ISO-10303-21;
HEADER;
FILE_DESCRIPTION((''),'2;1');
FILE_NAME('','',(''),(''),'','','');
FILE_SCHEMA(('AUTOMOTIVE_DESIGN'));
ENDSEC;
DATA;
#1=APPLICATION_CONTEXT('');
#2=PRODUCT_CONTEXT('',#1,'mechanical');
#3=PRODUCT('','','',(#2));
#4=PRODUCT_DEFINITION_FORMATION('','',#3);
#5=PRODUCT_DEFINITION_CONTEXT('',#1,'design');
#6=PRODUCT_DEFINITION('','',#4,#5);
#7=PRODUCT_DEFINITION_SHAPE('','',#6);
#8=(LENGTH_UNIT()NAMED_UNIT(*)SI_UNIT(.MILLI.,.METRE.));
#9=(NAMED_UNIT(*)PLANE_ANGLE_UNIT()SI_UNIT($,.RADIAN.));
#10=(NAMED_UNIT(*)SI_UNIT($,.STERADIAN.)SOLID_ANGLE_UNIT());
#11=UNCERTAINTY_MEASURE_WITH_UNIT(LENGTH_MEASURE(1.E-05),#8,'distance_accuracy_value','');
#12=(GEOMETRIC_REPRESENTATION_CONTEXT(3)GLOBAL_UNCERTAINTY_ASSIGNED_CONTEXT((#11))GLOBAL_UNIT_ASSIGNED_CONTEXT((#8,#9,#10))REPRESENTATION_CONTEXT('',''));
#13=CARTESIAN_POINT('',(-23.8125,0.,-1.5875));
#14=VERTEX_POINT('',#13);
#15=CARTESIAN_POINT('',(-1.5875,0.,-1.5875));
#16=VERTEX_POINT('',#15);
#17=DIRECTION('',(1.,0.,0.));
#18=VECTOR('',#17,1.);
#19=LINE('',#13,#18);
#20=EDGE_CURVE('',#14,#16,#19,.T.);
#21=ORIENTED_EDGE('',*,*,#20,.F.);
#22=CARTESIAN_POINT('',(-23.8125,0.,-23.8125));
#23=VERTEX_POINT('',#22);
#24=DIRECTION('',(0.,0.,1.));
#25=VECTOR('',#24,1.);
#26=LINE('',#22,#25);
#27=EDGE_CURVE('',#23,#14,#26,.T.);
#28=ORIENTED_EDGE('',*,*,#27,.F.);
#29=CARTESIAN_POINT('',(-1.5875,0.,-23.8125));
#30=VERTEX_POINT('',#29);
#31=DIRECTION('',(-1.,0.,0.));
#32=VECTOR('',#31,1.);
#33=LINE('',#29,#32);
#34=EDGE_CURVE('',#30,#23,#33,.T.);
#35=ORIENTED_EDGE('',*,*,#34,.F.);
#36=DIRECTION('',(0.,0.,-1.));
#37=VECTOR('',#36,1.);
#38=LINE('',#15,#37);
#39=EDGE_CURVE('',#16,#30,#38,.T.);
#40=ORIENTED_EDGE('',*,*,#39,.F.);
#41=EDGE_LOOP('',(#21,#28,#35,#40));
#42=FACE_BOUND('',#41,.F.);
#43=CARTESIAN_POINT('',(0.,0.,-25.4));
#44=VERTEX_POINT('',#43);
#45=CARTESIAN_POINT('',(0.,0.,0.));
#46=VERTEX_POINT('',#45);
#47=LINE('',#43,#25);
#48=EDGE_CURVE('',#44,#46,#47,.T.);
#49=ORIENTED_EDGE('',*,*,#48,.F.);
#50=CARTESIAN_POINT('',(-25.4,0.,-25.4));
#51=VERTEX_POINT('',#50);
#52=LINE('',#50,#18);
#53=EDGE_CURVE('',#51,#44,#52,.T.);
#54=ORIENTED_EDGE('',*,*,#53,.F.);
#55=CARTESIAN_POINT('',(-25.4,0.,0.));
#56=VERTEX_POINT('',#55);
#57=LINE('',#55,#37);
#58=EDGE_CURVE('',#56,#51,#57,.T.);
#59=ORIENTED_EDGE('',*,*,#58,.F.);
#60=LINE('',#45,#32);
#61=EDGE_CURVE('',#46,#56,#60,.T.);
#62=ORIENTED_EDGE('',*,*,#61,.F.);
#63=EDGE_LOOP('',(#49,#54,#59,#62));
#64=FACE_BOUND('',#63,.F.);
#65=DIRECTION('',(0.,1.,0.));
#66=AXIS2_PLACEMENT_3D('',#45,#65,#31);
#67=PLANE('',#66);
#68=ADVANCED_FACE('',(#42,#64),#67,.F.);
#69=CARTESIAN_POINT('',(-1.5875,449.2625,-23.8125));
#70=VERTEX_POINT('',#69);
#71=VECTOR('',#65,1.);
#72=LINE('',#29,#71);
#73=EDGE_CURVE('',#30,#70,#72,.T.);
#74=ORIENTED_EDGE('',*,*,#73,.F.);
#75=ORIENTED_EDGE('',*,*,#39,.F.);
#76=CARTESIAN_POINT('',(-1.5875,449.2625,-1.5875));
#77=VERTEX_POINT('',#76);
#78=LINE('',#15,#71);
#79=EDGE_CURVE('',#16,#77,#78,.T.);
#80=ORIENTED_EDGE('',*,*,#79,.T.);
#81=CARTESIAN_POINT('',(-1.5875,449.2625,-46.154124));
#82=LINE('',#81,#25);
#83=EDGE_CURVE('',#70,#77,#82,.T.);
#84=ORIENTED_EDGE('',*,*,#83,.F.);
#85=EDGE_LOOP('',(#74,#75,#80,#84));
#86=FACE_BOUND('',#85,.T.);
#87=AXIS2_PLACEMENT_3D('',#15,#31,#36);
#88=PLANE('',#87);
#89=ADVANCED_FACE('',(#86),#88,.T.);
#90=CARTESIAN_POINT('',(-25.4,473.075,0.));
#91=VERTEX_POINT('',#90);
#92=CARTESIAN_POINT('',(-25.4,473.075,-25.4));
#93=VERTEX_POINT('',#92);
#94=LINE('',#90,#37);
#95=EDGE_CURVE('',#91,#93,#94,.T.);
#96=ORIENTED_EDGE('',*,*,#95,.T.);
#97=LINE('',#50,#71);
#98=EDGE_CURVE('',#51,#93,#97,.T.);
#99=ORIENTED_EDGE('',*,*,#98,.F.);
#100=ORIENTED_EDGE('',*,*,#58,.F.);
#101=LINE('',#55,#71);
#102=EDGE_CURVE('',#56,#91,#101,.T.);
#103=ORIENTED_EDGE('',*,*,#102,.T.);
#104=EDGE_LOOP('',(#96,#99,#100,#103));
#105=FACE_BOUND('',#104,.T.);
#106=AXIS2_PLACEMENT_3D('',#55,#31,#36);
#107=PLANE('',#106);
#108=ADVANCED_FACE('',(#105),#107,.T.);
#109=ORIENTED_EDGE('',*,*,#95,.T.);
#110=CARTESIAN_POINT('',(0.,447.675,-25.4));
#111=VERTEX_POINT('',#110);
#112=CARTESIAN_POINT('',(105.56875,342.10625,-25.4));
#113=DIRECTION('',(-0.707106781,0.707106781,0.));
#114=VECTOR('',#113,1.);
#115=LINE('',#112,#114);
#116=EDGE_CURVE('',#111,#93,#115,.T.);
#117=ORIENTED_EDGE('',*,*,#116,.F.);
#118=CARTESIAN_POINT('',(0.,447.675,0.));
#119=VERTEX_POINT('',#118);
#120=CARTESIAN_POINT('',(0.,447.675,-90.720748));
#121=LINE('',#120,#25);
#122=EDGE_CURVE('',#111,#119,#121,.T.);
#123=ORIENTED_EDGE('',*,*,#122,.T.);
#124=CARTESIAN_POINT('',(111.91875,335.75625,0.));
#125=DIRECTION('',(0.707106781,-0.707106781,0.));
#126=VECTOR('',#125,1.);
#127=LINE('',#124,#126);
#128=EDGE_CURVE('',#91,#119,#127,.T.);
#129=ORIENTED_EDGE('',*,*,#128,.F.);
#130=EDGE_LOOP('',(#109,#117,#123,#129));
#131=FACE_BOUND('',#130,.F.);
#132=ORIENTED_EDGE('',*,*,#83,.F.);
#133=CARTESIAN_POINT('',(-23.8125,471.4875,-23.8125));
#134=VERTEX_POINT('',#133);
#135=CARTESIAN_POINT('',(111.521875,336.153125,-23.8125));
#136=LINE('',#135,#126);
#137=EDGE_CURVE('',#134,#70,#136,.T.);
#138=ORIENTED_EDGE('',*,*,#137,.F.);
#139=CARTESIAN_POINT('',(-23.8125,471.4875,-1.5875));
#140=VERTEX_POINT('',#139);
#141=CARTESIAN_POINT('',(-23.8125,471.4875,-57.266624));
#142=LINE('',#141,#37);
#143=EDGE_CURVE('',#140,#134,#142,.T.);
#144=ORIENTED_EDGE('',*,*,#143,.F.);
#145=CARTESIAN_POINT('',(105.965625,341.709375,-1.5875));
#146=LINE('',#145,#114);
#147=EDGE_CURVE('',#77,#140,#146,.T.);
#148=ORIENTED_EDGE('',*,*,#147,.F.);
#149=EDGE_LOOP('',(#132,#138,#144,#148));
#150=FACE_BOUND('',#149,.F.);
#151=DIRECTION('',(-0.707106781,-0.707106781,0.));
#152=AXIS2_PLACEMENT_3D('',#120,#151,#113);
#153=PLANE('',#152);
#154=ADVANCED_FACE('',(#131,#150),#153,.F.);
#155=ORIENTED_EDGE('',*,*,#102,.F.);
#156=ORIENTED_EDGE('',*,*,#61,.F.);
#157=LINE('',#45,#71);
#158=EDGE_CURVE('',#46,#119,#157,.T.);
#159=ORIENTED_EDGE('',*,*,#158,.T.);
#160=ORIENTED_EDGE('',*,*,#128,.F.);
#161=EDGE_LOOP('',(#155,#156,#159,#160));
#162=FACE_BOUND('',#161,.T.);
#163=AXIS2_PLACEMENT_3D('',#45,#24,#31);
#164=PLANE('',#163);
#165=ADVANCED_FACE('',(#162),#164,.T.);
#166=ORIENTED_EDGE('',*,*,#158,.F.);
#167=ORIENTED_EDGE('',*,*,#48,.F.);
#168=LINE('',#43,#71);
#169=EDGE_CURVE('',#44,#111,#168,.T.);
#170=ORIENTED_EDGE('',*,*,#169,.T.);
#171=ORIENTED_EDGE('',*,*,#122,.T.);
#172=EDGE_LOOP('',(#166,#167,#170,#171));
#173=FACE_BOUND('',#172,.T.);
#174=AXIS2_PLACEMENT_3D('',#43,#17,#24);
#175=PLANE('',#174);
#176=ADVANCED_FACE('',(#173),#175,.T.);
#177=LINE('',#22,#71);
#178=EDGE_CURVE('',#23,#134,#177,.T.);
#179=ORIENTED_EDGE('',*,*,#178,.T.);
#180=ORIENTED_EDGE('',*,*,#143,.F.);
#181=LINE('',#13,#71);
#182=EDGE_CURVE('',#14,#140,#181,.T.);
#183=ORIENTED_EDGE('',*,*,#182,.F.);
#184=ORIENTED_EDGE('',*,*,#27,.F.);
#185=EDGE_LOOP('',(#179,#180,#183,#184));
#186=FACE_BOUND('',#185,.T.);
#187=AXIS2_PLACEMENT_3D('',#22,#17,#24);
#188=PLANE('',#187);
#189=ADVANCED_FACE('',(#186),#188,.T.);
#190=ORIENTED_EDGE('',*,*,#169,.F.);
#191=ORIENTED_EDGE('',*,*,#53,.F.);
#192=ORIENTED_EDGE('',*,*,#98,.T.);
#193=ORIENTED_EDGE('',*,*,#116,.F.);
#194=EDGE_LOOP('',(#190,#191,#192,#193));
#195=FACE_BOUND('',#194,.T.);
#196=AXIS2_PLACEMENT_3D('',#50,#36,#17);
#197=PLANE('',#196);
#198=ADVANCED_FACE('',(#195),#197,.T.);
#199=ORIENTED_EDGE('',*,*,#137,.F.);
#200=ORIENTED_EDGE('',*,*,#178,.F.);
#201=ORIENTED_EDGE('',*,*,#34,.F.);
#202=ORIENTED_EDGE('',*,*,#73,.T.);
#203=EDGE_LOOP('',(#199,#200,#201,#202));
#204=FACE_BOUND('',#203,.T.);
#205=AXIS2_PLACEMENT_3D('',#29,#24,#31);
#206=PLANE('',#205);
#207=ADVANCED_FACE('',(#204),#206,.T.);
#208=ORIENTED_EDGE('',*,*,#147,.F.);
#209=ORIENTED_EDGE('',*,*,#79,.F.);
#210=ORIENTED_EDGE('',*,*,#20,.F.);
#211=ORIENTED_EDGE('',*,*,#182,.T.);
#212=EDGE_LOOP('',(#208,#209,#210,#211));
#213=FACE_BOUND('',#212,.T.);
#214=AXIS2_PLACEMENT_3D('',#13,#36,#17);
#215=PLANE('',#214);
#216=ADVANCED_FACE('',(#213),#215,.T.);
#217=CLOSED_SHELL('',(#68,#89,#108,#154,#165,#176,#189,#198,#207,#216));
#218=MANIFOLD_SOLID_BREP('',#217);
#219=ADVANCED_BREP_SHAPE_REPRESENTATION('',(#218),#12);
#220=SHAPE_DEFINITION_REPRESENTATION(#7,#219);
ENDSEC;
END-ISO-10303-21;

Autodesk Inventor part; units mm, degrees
ref_plane "YZ Plane" through (0, 0, 0) normal (1, 0, 0) x (0, 1, 0)
ref_plane "XZ Plane" through (0, 0, 0) normal (0, 1, 0) x (-1, 0, 0)
ref_plane "XY Plane" through (0, 0, 0) normal (0, 0, 1) x (1, 0, 0)
sketch "Sketch1" plane through (0, 0, 0) normal (0, 1, 0) x (-1, 0, 0)
  line L0 (0, 0) -> (25.4, 0)
  line L1 (25.4, 0) -> (25.4, -25.4)
  line L2 (25.4, -25.4) -> (0, -25.4)
  line L3 (0, -25.4) -> (0, 0)
  line L4 (23.8125, -1.5875) -> (1.5875, -1.5875)
  line L5 (1.5875, -1.5875) -> (1.5875, -23.8125)
  line L6 (1.5875, -23.8125) -> (23.8125, -23.8125)
  line L7 (23.8125, -23.8125) -> (23.8125, -1.5875)
  dimension "d0" = 25.4
  dimension "d1" = 25.4
  dimension "d2" = 1.5875
extrude "Extrusion1" add sketch "Sketch1" along normal blind 473.075
chamfer "Chamfer1" distance 25.4 angle 45 1 edges at (0, 473.075, -12.7)
properties part number "SUP_008_FrontCornerVertical" material "Aluminum 6061"
